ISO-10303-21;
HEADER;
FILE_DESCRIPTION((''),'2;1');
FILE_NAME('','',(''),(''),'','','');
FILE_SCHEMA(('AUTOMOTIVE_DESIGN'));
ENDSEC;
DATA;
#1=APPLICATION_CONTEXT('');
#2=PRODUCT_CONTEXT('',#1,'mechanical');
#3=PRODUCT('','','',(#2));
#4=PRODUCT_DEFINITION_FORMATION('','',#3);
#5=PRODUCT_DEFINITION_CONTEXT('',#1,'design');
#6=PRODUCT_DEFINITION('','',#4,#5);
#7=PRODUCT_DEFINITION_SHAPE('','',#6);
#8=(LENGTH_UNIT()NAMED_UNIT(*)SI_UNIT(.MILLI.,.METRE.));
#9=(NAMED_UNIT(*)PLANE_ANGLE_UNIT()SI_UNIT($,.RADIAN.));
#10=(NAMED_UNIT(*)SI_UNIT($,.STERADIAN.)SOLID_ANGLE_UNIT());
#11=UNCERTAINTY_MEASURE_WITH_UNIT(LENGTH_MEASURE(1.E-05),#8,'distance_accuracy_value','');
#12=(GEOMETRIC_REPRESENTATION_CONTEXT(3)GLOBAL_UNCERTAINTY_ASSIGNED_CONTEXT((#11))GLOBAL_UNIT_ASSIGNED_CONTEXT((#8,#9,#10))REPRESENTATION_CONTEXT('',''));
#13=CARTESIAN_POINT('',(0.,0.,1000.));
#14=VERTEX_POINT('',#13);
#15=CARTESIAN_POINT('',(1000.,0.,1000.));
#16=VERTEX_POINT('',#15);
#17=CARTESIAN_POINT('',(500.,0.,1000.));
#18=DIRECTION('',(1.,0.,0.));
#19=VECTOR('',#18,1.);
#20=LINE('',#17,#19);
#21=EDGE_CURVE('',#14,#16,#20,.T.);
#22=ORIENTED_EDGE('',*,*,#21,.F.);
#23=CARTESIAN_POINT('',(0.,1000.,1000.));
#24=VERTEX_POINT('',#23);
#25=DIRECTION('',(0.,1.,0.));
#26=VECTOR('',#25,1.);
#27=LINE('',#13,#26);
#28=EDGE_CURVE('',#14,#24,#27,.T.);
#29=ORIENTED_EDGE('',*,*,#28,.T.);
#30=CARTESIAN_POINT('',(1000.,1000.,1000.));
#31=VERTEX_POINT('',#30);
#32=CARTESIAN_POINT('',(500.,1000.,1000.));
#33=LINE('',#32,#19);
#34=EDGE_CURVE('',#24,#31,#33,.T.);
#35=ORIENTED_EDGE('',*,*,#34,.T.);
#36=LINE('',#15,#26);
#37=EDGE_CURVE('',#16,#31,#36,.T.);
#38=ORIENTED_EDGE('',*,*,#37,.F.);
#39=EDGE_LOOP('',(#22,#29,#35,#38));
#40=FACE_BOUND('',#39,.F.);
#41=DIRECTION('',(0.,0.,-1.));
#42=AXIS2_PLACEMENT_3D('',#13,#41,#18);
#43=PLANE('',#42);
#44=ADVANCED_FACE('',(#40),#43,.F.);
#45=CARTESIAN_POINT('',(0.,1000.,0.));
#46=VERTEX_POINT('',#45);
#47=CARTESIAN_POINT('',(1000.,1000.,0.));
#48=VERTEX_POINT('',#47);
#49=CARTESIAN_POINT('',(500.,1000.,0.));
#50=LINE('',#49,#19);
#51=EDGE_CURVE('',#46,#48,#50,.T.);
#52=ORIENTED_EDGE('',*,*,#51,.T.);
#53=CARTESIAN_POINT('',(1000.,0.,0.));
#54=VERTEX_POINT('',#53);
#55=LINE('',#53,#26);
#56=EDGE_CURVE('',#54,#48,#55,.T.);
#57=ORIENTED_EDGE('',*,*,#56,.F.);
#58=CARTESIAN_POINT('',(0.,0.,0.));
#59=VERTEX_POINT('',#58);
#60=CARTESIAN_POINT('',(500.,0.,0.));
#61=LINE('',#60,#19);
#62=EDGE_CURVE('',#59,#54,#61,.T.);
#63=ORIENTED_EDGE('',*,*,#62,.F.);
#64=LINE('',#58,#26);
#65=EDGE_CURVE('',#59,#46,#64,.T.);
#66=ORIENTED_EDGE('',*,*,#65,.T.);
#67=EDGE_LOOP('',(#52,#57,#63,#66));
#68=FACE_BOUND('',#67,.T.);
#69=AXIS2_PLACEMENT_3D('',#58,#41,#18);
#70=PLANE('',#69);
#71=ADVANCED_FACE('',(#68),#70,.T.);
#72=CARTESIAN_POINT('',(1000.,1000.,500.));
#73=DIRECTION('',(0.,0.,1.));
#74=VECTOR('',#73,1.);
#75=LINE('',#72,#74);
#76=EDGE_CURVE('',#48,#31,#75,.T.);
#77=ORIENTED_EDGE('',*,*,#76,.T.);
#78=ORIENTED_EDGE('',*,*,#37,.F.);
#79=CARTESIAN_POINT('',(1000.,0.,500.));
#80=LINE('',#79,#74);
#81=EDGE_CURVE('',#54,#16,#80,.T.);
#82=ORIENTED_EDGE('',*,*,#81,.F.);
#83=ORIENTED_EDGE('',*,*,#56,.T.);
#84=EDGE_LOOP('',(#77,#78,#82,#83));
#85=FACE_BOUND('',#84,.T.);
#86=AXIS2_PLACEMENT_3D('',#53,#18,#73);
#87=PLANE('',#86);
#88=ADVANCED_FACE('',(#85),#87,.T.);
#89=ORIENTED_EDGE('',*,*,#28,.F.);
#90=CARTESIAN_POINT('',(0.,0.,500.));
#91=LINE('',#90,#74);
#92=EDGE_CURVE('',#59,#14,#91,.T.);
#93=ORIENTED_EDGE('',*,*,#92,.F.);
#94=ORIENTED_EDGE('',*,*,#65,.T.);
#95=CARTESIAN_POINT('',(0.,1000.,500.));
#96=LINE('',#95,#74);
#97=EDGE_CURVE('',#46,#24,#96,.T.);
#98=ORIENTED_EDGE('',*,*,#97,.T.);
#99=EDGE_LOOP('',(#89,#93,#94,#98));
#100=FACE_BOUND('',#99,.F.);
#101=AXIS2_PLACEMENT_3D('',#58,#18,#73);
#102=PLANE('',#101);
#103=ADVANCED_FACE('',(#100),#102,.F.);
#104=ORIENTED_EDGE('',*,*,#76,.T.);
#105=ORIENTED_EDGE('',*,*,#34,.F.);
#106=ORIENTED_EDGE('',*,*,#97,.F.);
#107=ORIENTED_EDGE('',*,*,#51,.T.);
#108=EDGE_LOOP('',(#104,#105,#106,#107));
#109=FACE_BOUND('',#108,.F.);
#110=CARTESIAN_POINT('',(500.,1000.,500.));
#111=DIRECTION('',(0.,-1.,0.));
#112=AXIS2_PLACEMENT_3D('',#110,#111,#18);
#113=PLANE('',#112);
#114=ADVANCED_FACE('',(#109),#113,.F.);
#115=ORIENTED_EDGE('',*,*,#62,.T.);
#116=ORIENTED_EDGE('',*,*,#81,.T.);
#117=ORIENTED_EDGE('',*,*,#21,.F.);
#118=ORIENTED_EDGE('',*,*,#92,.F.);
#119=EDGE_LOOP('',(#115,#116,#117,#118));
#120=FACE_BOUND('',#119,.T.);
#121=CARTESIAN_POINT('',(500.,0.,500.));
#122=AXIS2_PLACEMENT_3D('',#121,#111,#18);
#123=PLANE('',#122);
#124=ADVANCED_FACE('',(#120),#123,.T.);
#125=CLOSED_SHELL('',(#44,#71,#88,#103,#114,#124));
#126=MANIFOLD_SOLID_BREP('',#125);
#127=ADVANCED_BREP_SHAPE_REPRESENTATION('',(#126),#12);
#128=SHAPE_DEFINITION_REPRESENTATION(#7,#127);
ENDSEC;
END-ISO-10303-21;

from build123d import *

# Parameters (mm, degrees)
F0_W     = 1000
F0_H     = 1000
F1_DEPTH = 1000


# Not quite as in the source:
# - a feature of the source that left no trace in its solid (it failed there, or was rolled back) is left out


with BuildPart() as f1:
    # F0 (on Front) → F1 (new body)
    with BuildSketch(Plane.XZ):
        with Locations((500, 500)):
            Rectangle(F0_W, F0_H)
    extrude(amount=-F1_DEPTH)


solid = f1.part
